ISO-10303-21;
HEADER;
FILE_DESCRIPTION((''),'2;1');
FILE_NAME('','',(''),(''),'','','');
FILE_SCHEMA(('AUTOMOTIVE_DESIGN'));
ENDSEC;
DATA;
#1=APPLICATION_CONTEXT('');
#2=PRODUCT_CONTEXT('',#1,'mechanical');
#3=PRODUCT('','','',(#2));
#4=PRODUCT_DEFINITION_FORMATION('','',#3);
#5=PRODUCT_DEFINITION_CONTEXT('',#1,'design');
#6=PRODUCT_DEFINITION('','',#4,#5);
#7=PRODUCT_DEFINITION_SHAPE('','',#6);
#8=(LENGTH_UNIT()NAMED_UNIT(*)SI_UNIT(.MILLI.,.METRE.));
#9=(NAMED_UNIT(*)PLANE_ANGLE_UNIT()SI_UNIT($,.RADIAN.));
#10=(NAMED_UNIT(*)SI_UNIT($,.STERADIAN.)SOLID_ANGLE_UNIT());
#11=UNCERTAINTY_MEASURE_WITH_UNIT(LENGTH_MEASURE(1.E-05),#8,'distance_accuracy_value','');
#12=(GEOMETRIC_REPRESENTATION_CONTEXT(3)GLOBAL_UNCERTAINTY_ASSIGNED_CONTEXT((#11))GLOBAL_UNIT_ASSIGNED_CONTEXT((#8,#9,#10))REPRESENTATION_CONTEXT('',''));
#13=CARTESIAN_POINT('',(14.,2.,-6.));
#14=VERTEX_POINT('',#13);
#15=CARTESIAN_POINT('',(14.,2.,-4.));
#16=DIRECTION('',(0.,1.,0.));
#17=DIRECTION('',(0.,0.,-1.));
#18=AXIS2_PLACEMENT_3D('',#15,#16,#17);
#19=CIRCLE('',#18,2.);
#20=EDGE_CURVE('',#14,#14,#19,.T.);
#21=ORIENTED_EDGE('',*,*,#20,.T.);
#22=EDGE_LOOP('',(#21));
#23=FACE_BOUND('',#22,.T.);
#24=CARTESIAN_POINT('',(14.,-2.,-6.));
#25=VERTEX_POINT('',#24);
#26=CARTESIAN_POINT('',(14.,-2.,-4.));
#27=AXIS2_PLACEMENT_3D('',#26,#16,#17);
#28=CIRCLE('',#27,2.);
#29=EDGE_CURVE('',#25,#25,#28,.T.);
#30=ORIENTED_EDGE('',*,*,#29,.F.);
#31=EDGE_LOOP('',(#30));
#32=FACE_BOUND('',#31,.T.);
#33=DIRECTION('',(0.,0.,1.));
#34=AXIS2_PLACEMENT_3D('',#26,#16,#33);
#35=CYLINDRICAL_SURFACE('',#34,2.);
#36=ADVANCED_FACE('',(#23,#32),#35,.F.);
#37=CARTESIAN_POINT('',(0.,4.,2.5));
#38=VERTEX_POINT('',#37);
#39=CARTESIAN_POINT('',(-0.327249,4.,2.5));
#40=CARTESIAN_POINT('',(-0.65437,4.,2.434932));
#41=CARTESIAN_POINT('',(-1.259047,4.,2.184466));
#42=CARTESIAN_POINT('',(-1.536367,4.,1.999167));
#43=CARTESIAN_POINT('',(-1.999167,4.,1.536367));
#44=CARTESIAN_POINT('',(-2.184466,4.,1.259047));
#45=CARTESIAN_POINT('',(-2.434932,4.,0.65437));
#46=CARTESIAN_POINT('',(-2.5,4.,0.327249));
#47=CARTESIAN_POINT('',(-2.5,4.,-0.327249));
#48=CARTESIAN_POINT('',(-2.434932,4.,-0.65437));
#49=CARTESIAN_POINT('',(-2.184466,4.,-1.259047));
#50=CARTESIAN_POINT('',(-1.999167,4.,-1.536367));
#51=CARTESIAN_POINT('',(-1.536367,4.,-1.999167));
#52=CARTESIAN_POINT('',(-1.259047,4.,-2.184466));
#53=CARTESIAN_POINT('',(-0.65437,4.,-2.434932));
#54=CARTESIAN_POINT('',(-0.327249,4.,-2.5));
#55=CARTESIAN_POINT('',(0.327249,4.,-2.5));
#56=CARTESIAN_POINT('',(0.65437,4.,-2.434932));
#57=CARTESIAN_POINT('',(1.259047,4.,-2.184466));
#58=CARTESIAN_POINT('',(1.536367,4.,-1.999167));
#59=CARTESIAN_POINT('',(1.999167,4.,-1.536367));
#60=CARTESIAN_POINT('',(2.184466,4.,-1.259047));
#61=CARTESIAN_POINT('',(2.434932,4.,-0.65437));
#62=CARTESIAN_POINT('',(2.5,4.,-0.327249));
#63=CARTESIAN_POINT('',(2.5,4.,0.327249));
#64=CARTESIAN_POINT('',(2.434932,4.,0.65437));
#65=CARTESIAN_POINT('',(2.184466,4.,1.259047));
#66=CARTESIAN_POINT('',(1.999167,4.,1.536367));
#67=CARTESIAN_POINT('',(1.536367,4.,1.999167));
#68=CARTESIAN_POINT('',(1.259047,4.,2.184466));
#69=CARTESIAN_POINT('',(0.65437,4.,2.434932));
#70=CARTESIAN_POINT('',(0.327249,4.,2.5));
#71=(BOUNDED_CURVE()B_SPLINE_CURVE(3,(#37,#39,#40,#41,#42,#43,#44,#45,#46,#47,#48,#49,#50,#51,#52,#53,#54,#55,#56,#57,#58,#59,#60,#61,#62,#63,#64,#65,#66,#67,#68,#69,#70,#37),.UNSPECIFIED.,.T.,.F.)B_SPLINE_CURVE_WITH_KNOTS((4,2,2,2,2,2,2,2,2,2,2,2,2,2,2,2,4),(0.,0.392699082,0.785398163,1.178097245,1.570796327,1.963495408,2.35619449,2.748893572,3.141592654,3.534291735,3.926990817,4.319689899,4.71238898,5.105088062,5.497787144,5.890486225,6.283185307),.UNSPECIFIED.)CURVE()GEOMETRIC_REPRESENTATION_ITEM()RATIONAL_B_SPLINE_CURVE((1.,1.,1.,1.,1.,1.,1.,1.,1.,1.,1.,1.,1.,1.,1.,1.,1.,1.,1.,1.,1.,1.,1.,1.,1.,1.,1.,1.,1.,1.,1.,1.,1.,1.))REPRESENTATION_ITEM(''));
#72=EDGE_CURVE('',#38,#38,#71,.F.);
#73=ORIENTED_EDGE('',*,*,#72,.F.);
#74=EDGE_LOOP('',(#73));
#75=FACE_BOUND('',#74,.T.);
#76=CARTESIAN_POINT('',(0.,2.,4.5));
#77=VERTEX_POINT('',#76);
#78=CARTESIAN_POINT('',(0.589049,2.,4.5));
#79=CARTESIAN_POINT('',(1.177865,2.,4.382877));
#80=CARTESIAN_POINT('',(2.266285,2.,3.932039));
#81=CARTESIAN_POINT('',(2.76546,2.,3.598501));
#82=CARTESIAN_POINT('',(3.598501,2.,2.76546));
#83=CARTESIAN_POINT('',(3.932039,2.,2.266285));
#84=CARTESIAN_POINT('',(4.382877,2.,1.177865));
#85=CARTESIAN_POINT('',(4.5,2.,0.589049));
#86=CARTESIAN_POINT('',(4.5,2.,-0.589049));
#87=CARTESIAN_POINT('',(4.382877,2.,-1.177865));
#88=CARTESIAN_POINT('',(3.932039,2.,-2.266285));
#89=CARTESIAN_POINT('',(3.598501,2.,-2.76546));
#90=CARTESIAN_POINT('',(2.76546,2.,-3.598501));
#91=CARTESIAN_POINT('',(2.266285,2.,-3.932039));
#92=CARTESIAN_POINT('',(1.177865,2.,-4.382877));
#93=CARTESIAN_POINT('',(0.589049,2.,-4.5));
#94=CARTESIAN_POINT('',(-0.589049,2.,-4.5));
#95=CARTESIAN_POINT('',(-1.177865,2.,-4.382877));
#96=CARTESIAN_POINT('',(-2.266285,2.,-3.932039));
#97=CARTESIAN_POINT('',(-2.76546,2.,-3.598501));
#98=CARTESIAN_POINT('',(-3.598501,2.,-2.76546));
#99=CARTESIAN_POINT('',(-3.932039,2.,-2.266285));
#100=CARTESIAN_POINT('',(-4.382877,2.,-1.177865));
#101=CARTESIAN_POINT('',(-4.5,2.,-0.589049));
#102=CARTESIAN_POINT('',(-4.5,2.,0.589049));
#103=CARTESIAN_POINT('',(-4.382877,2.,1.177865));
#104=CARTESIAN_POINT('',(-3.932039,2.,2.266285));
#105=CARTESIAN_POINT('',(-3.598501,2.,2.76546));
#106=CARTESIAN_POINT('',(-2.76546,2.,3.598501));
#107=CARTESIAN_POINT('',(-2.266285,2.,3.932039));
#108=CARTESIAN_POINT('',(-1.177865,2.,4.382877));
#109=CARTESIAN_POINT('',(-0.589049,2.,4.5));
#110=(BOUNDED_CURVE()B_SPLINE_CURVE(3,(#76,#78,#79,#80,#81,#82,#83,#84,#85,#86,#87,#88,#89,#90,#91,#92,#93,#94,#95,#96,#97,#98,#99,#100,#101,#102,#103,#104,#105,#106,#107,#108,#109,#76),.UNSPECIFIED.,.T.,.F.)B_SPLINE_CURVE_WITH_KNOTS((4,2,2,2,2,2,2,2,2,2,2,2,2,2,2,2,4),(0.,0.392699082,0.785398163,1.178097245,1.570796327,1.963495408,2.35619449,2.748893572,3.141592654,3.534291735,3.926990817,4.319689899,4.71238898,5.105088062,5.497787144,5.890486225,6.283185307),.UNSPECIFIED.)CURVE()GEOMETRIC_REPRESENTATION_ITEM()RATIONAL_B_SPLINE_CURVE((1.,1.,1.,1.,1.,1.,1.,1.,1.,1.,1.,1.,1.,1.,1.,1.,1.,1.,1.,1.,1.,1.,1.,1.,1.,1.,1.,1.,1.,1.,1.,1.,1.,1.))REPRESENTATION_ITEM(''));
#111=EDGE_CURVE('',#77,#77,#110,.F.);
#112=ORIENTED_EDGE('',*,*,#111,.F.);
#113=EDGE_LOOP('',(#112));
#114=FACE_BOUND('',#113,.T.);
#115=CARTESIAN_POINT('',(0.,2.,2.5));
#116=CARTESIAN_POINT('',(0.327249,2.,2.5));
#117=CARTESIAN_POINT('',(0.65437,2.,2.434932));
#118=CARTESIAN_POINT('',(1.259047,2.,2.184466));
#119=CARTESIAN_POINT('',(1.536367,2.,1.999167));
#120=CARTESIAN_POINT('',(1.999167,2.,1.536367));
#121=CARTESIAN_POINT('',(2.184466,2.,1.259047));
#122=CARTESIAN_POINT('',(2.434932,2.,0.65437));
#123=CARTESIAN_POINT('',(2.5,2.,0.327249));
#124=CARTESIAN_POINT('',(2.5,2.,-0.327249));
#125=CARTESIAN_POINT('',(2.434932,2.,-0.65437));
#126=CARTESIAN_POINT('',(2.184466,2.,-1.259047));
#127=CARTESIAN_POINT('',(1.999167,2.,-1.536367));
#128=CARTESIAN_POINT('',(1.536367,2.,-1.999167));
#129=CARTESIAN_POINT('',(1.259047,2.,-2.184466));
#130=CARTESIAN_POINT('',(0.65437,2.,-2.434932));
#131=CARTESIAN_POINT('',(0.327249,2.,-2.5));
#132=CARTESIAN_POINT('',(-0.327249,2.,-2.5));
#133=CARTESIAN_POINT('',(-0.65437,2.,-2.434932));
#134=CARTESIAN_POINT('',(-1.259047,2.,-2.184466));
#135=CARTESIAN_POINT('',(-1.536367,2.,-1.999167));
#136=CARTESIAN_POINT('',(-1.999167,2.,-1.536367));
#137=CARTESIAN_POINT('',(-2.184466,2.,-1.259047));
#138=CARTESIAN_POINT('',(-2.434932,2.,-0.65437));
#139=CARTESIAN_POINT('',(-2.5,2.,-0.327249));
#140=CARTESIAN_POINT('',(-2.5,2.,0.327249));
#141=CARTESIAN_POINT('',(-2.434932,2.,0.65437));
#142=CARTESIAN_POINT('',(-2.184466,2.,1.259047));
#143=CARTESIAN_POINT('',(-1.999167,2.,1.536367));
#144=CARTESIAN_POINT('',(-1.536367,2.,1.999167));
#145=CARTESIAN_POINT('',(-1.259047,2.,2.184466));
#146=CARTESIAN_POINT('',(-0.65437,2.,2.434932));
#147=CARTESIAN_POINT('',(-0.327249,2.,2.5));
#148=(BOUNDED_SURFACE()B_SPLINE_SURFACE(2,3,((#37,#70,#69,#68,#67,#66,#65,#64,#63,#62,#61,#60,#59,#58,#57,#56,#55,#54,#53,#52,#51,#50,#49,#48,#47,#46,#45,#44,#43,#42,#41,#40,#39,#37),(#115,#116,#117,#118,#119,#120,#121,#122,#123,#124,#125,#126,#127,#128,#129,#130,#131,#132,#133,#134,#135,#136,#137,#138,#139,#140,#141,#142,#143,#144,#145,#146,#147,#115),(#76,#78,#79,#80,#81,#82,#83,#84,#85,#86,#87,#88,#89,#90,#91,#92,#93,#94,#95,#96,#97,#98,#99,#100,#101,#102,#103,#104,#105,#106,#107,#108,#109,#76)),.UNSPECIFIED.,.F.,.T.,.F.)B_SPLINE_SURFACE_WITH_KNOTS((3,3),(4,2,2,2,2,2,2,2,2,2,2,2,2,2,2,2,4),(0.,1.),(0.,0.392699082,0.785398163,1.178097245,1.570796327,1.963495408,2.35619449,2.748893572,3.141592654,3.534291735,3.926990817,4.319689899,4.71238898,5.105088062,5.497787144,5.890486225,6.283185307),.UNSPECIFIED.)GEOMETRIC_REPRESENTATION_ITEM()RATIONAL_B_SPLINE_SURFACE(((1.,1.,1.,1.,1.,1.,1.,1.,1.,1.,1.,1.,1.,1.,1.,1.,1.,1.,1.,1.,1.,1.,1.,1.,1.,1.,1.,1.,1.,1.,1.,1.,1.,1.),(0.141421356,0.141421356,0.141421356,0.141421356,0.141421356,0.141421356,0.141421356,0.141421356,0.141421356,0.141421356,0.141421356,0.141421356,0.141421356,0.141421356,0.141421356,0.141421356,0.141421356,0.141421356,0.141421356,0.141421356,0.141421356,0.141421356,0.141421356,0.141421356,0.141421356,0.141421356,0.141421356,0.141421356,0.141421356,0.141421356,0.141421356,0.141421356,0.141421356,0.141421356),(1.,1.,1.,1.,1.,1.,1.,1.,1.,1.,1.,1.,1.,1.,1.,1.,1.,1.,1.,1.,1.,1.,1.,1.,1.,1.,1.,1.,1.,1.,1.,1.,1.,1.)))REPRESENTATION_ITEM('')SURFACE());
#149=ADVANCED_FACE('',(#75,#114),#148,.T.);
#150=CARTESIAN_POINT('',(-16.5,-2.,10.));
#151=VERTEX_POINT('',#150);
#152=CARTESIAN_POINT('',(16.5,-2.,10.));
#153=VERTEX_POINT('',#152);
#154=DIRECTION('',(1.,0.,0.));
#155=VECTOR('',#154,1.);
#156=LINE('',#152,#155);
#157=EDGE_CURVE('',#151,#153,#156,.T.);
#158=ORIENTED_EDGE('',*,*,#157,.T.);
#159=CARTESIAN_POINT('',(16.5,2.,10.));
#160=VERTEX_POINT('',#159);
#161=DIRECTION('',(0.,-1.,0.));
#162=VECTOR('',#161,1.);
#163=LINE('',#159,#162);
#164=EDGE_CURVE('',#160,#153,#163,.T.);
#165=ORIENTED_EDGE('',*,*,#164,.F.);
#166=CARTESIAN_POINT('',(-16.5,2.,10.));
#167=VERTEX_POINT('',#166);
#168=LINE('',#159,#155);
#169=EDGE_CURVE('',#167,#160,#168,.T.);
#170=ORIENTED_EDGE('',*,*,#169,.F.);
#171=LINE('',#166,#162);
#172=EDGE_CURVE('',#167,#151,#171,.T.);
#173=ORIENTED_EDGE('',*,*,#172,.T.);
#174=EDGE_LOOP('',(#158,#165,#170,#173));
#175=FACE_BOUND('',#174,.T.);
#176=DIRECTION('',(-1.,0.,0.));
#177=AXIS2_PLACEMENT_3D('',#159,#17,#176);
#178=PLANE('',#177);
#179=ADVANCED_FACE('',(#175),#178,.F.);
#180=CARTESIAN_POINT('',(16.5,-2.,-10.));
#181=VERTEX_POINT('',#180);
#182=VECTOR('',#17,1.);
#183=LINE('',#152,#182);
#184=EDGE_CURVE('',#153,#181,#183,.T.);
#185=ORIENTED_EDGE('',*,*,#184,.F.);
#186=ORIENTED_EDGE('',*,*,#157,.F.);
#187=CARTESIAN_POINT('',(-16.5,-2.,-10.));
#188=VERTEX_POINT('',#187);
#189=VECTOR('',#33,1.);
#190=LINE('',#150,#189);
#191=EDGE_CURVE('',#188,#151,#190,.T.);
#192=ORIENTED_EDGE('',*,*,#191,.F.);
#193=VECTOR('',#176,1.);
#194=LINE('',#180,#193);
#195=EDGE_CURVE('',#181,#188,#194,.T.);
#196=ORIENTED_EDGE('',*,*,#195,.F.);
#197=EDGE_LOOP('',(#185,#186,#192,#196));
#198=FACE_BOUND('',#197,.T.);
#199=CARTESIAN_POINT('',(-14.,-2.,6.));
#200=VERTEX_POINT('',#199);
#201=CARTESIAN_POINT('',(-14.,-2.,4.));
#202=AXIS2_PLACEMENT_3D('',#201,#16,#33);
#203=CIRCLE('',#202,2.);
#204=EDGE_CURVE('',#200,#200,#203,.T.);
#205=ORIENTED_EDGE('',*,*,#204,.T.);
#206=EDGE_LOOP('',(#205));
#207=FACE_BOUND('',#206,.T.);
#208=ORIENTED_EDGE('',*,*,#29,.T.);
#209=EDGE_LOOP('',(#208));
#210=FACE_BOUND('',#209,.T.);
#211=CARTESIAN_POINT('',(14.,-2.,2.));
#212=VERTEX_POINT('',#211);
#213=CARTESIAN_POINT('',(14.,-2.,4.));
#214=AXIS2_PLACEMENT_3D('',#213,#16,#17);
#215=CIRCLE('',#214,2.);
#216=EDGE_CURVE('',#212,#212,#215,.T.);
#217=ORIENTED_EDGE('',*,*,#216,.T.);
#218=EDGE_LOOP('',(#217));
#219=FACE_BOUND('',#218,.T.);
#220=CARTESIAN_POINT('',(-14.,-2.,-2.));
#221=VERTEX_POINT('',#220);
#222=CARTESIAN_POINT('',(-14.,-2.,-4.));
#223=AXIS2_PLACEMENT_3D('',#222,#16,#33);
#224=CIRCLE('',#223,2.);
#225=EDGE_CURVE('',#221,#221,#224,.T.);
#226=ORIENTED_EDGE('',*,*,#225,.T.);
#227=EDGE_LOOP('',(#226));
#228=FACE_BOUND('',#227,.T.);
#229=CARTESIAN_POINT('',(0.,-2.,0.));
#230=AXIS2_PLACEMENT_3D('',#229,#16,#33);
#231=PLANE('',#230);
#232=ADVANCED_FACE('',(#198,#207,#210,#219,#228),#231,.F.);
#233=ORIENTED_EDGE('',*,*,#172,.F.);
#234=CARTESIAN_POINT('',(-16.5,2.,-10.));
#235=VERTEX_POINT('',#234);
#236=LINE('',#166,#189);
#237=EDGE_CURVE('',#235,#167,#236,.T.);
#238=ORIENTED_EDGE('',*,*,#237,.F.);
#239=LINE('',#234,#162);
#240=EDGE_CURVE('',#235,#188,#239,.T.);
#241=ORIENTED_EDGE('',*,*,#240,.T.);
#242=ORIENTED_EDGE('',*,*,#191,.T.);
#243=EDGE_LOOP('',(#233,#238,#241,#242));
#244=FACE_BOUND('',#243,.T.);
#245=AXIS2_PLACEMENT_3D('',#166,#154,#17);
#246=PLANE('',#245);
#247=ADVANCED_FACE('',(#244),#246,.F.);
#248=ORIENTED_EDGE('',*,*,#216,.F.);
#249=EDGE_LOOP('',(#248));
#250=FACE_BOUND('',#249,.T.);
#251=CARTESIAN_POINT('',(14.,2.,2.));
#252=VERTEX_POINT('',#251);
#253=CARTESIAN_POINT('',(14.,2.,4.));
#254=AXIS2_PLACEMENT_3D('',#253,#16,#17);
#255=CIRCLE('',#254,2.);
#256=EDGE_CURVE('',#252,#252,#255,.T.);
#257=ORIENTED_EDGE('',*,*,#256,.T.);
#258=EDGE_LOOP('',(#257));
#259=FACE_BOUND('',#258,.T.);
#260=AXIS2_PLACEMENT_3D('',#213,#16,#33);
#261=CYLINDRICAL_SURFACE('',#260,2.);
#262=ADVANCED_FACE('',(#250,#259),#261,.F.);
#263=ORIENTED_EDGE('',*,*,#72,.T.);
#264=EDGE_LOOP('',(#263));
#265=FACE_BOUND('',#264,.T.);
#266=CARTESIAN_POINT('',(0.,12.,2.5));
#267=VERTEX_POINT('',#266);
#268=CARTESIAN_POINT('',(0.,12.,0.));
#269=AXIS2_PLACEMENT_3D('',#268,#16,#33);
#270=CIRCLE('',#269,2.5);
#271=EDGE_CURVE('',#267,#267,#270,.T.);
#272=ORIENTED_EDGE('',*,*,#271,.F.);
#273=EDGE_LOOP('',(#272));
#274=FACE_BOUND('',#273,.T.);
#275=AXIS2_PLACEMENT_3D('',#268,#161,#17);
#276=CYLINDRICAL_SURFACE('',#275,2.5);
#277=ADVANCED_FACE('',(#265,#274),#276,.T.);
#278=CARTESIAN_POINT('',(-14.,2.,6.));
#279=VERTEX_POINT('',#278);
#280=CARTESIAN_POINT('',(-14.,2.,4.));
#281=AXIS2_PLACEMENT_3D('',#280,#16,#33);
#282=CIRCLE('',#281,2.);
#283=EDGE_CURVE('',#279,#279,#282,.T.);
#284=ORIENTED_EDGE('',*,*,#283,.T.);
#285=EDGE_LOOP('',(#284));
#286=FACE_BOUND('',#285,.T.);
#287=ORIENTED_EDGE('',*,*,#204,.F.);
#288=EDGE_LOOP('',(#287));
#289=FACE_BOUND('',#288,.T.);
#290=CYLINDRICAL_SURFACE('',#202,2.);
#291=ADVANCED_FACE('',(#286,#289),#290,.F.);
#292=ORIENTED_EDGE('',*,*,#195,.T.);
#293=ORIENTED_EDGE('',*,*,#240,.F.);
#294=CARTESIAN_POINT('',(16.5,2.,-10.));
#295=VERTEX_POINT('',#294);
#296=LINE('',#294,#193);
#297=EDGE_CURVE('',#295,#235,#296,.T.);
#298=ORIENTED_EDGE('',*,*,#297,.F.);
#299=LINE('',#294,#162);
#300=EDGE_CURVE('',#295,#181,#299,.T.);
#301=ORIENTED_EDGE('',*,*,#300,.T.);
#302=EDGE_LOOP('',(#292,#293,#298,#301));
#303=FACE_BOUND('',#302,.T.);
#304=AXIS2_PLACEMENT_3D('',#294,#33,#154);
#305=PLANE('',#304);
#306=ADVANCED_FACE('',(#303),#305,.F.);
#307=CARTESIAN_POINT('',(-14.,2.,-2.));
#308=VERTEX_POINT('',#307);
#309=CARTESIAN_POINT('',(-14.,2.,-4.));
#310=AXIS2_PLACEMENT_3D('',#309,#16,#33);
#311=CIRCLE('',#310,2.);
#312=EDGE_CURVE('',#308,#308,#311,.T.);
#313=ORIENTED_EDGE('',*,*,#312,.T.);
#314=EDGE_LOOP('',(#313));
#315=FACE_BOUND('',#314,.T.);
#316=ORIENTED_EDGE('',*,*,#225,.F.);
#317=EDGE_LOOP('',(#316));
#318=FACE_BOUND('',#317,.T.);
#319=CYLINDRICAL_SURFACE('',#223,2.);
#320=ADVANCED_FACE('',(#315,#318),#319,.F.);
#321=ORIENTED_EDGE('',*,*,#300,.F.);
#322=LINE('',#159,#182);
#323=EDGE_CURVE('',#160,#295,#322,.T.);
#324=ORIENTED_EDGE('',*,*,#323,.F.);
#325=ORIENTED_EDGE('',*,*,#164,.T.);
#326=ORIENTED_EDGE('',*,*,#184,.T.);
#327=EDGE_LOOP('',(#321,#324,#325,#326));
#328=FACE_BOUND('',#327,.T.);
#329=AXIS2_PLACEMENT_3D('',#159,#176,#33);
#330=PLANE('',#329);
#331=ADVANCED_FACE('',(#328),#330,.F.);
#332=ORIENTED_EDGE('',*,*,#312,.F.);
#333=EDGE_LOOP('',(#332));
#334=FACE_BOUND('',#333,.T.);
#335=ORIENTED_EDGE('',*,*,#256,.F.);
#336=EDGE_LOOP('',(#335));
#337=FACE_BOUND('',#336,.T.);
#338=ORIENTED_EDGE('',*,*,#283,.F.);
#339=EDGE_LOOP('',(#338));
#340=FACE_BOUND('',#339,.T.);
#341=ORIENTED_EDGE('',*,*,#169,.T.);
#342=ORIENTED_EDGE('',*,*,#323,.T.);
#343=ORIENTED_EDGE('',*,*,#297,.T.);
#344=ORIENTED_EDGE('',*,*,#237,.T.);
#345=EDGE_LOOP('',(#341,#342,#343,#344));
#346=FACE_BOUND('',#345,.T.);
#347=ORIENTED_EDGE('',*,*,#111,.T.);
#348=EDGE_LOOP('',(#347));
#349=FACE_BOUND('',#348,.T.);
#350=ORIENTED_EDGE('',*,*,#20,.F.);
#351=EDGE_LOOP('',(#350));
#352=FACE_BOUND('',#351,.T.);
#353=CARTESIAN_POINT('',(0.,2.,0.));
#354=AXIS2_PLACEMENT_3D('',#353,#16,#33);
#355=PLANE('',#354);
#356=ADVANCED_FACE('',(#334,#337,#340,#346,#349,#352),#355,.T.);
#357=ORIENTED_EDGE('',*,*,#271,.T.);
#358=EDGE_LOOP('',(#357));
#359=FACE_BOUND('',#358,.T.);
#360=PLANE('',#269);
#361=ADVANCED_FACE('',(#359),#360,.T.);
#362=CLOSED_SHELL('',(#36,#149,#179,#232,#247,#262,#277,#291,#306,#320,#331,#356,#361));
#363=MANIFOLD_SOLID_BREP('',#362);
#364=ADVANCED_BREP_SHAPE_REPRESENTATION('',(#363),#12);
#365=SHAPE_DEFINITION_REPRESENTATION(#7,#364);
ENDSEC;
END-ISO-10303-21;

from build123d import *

# Parameters (mm, degrees)
SKETCH1_W           = 33
SKETCH1_H           = 20
BOSS_EXTRUDE1_DEPTH = 2
SKETCH2_R           = 2
CUT_EXTRUDE1_DEPTH  = 20.704060495
SKETCH3_R           = 2.5
BOSS_EXTRUDE2_DEPTH = 10
FILLET1_SIZE        = 2


with BuildPart() as part:
    # Sketch1 → Boss-Extrude1 (new, symmetric)
    with BuildSketch(Plane(origin=(0, 0, 0), x_dir=(1, 0, 0), z_dir=(0, 1, 0))):
        Rectangle(SKETCH1_W, SKETCH1_H)
    extrude(amount=BOSS_EXTRUDE1_DEPTH, both=True)

    # Sketch2 → Cut-Extrude1 (cut, through all)
    with BuildSketch(Plane(origin=(0, 2, 0), x_dir=(1, 0, 0), z_dir=(0, 1, 0))):
        with Locations(Location((-14, 4, 0), (0, 0, 270))):
            Circle(SKETCH2_R)
        with Locations(Location((-14, -4, 0), (0, 0, 270))):
            Circle(SKETCH2_R)
        with Locations(Location((14, -4, 0), (0, 0, 90))):
            Circle(SKETCH2_R)
        with Locations(Location((14, 4, 0), (0, 0, 90))):
            Circle(SKETCH2_R)
    extrude(amount=-CUT_EXTRUDE1_DEPTH, mode=Mode.SUBTRACT)

    # Sketch3 → Boss-Extrude2 (add)
    with BuildSketch(Plane(origin=(0, 2, 0), x_dir=(1, 0, 0), z_dir=(0, 1, 0))):
        with Locations(Location((0, 0, 0), (0, 0, 270))):
            Circle(SKETCH3_R)
    extrude(amount=BOSS_EXTRUDE2_DEPTH)

    # Fillet1
    # a fillet whose section is not a circle: 2 mm, written as the material it adds along each edge
    with BuildSketch(Plane(origin=(0, 2, 0), x_dir=(0, 0, 1), z_dir=(-1, 0, 0))) as fillet1_piece_1:
        with BuildLine():
            Bezier((2.5 + FILLET1_SIZE, 0), (2.5, 0), (2.5, FILLET1_SIZE), weights=[1, 0.141421356, 1])
            Line((2.5, FILLET1_SIZE), (2.5, 0))
            Line((2.5, 0), (2.5 + FILLET1_SIZE, 0))
        make_face()
    revolve(axis=Axis((0, 2, 0), (0, 1, 0)))


solid = part.part
